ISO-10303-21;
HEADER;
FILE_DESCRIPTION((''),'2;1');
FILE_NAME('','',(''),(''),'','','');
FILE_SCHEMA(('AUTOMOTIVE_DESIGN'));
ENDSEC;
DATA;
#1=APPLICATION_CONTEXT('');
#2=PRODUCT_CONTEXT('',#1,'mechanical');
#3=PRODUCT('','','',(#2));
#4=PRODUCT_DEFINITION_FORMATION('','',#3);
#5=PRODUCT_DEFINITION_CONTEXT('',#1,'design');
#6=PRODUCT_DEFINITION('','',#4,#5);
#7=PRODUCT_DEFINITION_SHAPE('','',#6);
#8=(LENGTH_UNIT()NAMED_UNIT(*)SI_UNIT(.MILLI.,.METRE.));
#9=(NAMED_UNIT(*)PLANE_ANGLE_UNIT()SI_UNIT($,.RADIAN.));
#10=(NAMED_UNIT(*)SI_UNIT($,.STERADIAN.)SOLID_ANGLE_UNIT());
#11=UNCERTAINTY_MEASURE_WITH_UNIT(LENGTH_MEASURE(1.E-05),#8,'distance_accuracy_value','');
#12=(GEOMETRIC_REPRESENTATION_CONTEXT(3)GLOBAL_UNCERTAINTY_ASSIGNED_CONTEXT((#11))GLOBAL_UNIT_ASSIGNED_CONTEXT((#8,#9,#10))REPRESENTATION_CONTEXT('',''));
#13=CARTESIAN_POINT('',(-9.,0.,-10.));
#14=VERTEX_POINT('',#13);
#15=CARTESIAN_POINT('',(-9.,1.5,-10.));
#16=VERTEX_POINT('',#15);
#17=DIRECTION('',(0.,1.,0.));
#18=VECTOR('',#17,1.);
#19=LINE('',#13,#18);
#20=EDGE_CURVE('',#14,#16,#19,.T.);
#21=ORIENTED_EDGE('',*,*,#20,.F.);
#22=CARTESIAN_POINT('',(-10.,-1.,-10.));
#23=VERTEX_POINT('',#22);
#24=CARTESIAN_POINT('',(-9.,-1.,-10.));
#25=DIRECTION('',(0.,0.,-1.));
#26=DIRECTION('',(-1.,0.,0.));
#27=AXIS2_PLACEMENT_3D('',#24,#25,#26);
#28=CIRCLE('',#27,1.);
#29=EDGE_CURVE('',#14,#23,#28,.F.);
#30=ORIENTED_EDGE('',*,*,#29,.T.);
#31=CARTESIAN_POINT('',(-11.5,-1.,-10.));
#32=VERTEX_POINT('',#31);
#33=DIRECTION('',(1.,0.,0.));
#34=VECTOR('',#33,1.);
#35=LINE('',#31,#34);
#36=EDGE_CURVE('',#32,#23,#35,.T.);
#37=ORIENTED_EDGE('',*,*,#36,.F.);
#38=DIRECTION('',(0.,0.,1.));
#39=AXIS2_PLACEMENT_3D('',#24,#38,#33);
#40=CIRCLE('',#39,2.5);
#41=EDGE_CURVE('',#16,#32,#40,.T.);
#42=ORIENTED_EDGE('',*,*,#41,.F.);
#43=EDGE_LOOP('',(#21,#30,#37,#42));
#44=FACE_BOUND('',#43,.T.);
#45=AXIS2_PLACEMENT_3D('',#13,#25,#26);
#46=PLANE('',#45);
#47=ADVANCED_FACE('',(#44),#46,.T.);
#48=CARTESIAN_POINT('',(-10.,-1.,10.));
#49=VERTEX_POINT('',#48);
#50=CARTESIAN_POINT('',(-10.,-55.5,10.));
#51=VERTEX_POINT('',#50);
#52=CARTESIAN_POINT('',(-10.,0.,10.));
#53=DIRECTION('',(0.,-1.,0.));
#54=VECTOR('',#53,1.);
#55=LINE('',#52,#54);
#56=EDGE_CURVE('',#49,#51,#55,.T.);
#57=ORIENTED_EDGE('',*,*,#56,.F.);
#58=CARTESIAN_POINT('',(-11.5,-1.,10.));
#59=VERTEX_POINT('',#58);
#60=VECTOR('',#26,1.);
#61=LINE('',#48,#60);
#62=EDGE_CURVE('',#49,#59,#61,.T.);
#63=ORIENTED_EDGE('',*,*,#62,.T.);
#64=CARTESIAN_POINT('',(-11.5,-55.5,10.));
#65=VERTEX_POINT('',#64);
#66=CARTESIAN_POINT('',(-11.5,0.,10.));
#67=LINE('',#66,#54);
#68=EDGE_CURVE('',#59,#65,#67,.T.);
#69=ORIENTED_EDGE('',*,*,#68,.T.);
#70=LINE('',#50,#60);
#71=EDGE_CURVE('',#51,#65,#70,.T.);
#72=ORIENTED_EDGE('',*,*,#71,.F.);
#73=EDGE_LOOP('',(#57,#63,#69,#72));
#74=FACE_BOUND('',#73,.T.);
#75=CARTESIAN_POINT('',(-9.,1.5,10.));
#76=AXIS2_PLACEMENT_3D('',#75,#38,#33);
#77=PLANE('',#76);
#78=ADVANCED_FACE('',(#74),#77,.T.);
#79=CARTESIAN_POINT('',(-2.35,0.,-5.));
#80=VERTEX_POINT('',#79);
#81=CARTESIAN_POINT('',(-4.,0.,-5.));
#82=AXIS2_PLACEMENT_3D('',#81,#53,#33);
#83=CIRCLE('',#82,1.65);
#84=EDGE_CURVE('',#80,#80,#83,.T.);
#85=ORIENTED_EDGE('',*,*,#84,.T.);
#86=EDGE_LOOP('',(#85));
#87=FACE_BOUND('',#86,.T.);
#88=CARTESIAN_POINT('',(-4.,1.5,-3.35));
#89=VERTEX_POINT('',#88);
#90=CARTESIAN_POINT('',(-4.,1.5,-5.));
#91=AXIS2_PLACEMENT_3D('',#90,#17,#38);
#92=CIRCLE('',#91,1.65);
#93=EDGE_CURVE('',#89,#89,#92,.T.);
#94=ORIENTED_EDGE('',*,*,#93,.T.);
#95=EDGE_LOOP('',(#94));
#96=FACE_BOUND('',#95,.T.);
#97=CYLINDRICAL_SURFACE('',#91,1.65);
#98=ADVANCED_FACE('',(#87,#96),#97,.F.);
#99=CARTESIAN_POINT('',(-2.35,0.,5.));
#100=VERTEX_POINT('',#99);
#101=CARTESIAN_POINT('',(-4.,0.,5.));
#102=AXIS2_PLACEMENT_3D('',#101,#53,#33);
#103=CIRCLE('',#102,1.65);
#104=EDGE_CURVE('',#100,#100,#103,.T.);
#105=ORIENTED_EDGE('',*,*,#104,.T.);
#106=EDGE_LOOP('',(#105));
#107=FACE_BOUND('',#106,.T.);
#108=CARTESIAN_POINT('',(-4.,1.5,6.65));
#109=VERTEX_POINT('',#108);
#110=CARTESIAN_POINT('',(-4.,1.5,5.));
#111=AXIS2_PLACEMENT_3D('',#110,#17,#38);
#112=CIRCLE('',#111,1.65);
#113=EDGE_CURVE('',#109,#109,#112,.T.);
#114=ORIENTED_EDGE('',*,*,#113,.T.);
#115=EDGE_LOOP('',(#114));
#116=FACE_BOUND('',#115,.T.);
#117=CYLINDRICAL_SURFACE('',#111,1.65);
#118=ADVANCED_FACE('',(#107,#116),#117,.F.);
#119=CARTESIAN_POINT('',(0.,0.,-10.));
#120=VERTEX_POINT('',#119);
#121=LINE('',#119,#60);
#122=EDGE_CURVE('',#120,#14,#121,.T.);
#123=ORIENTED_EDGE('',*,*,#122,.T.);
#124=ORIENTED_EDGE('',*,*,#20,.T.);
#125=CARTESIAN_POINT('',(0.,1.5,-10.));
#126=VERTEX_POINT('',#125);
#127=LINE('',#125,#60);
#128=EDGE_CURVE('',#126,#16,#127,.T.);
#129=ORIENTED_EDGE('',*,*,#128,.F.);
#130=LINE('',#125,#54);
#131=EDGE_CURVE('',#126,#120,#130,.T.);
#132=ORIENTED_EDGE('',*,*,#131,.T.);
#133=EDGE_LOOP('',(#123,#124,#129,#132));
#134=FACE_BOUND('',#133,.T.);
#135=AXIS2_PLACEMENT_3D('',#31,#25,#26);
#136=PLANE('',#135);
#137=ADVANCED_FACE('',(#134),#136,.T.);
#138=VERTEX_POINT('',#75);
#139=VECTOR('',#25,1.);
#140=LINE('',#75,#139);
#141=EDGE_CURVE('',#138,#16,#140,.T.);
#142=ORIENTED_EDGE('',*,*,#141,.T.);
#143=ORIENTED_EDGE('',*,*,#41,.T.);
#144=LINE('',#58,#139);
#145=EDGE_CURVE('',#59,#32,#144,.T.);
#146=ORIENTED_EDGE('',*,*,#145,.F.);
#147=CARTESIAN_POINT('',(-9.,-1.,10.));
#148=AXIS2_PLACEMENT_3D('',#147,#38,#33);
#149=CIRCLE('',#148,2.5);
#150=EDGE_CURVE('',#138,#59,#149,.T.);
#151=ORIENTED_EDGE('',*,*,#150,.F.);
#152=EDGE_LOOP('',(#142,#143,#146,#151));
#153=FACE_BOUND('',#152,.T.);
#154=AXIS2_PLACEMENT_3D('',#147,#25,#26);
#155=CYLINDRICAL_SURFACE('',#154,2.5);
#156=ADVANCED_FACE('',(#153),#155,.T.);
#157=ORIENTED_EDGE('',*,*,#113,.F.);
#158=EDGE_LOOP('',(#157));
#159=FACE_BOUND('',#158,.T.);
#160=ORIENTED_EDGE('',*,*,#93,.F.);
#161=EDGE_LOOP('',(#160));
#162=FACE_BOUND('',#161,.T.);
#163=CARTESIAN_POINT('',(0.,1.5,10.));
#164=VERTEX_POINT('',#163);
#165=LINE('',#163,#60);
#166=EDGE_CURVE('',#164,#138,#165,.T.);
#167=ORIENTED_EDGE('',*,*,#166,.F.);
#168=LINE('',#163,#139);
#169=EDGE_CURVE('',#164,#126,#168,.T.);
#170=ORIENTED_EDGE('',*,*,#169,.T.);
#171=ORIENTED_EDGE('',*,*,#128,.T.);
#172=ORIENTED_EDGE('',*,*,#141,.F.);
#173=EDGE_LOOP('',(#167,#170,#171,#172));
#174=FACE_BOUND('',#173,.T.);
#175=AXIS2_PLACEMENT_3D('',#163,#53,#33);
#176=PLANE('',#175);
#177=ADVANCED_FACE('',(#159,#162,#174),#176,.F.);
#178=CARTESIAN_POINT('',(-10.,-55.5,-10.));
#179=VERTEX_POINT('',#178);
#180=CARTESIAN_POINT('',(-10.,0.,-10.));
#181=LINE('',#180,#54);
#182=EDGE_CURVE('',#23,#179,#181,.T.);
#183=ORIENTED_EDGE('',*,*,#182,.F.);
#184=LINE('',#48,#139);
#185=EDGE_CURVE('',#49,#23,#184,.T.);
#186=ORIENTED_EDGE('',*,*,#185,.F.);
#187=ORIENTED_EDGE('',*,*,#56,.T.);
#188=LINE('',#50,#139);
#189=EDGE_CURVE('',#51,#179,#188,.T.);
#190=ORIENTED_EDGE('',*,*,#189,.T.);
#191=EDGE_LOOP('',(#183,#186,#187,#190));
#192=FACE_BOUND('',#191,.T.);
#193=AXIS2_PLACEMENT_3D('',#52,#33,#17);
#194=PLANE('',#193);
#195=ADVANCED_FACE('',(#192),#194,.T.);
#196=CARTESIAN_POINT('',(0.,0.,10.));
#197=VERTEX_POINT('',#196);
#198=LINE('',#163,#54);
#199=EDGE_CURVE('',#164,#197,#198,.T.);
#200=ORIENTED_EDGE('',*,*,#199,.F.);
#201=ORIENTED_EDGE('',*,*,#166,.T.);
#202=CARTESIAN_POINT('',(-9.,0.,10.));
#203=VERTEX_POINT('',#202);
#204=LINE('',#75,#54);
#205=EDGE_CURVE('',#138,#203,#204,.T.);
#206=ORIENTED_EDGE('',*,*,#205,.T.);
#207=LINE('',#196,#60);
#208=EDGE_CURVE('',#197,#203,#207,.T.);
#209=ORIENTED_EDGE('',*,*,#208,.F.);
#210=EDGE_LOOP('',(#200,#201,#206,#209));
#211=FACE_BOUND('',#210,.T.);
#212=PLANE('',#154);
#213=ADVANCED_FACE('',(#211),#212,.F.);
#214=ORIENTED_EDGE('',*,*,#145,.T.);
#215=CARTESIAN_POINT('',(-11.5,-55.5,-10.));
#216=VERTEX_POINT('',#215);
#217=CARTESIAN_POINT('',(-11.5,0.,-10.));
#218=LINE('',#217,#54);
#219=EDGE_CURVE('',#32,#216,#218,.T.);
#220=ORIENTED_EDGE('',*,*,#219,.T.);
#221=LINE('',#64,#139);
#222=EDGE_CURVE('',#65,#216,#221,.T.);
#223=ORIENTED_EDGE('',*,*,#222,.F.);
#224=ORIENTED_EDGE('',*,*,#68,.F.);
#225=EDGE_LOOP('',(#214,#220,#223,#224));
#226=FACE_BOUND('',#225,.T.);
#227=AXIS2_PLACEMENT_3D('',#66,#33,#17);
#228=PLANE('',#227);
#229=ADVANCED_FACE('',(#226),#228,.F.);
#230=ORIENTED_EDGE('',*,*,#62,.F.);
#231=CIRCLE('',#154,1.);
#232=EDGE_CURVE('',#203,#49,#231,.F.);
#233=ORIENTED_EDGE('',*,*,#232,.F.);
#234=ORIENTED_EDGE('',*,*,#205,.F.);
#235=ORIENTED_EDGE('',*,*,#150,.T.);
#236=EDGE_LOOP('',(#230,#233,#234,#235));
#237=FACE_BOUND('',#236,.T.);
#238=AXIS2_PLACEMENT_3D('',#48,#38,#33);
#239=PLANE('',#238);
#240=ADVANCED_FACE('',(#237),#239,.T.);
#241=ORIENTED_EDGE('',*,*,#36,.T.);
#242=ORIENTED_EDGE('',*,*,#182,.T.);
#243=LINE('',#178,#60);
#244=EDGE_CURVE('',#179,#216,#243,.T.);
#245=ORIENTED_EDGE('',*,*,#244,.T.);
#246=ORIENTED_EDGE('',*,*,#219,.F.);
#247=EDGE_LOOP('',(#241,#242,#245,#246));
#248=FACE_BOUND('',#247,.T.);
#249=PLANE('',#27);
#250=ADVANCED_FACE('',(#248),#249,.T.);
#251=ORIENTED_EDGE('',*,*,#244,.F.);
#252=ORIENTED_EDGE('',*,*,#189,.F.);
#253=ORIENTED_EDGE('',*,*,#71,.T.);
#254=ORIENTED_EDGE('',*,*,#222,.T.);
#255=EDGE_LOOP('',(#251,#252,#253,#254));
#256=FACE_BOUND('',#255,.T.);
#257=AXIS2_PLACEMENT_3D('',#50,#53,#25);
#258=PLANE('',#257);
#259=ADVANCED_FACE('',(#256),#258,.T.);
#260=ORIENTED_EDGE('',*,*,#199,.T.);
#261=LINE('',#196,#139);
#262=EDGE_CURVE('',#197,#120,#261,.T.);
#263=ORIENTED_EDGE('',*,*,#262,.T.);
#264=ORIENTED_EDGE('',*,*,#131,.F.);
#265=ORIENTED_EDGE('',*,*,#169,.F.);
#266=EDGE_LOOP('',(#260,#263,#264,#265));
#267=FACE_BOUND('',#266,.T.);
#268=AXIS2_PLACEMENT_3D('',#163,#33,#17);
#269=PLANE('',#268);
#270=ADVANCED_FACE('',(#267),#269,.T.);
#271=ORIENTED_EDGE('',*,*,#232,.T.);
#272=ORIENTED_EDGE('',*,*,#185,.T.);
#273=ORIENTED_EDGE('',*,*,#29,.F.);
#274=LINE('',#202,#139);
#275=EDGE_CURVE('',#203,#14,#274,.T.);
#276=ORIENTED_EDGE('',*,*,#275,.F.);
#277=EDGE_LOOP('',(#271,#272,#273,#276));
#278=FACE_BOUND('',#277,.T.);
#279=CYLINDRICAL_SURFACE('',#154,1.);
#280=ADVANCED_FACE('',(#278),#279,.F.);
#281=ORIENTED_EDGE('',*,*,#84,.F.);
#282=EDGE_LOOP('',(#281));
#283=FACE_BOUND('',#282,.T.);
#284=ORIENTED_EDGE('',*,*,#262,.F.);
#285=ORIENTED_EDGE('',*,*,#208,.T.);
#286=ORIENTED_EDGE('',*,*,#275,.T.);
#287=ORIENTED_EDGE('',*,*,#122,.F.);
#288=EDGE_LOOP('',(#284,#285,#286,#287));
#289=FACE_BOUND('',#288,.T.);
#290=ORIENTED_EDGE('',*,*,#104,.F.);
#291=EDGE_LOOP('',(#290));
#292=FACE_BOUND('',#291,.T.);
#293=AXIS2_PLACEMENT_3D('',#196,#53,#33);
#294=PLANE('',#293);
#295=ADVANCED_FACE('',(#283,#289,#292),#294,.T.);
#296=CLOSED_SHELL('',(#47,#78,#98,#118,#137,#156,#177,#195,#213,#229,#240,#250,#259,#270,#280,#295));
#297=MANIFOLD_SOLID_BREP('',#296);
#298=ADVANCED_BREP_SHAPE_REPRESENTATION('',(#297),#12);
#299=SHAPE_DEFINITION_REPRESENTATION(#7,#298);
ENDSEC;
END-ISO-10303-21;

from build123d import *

# Parameters (mm, degrees)
SM_BASE_FLANGE_1_DEPTH = 10
HOLE_WIZARD_M4_1_D     = 3.3


# Sheet-metal steps are written as plain solids
with BuildPart() as part:
    # Sketch 1 → 基体-法兰1 (new, symmetric)
    with BuildSketch(Plane.XY):
        with BuildLine():
            Line((0, 0), (-9, 0))
            ThreePointArc((-9, 0), (-9.707106781, -0.292893219), (-10, -1))
            Line((-10, -1), (-10, -55.5))
            Line((-10, -55.5), (-11.5, -55.5))
            Line((-11.5, -55.5), (-11.5, -1))
            ThreePointArc((-11.5, -1), (-10.767766953, 0.767766953), (-9, 1.5))
            Line((-9, 1.5), (0, 1.5))
            Line((0, 1.5), (0, 0))
        make_face()
    extrude(amount=SM_BASE_FLANGE_1_DEPTH, both=True)

    # M4 螺纹孔1 (through all)
    with Locations(Plane(origin=(0, 1.5, 0), x_dir=(1, 0, 0), z_dir=(0, 1, 0))):
        with Locations((-4, 5), (-4, -5)):
            Hole(HOLE_WIZARD_M4_1_D / 2)


solid = part.part
